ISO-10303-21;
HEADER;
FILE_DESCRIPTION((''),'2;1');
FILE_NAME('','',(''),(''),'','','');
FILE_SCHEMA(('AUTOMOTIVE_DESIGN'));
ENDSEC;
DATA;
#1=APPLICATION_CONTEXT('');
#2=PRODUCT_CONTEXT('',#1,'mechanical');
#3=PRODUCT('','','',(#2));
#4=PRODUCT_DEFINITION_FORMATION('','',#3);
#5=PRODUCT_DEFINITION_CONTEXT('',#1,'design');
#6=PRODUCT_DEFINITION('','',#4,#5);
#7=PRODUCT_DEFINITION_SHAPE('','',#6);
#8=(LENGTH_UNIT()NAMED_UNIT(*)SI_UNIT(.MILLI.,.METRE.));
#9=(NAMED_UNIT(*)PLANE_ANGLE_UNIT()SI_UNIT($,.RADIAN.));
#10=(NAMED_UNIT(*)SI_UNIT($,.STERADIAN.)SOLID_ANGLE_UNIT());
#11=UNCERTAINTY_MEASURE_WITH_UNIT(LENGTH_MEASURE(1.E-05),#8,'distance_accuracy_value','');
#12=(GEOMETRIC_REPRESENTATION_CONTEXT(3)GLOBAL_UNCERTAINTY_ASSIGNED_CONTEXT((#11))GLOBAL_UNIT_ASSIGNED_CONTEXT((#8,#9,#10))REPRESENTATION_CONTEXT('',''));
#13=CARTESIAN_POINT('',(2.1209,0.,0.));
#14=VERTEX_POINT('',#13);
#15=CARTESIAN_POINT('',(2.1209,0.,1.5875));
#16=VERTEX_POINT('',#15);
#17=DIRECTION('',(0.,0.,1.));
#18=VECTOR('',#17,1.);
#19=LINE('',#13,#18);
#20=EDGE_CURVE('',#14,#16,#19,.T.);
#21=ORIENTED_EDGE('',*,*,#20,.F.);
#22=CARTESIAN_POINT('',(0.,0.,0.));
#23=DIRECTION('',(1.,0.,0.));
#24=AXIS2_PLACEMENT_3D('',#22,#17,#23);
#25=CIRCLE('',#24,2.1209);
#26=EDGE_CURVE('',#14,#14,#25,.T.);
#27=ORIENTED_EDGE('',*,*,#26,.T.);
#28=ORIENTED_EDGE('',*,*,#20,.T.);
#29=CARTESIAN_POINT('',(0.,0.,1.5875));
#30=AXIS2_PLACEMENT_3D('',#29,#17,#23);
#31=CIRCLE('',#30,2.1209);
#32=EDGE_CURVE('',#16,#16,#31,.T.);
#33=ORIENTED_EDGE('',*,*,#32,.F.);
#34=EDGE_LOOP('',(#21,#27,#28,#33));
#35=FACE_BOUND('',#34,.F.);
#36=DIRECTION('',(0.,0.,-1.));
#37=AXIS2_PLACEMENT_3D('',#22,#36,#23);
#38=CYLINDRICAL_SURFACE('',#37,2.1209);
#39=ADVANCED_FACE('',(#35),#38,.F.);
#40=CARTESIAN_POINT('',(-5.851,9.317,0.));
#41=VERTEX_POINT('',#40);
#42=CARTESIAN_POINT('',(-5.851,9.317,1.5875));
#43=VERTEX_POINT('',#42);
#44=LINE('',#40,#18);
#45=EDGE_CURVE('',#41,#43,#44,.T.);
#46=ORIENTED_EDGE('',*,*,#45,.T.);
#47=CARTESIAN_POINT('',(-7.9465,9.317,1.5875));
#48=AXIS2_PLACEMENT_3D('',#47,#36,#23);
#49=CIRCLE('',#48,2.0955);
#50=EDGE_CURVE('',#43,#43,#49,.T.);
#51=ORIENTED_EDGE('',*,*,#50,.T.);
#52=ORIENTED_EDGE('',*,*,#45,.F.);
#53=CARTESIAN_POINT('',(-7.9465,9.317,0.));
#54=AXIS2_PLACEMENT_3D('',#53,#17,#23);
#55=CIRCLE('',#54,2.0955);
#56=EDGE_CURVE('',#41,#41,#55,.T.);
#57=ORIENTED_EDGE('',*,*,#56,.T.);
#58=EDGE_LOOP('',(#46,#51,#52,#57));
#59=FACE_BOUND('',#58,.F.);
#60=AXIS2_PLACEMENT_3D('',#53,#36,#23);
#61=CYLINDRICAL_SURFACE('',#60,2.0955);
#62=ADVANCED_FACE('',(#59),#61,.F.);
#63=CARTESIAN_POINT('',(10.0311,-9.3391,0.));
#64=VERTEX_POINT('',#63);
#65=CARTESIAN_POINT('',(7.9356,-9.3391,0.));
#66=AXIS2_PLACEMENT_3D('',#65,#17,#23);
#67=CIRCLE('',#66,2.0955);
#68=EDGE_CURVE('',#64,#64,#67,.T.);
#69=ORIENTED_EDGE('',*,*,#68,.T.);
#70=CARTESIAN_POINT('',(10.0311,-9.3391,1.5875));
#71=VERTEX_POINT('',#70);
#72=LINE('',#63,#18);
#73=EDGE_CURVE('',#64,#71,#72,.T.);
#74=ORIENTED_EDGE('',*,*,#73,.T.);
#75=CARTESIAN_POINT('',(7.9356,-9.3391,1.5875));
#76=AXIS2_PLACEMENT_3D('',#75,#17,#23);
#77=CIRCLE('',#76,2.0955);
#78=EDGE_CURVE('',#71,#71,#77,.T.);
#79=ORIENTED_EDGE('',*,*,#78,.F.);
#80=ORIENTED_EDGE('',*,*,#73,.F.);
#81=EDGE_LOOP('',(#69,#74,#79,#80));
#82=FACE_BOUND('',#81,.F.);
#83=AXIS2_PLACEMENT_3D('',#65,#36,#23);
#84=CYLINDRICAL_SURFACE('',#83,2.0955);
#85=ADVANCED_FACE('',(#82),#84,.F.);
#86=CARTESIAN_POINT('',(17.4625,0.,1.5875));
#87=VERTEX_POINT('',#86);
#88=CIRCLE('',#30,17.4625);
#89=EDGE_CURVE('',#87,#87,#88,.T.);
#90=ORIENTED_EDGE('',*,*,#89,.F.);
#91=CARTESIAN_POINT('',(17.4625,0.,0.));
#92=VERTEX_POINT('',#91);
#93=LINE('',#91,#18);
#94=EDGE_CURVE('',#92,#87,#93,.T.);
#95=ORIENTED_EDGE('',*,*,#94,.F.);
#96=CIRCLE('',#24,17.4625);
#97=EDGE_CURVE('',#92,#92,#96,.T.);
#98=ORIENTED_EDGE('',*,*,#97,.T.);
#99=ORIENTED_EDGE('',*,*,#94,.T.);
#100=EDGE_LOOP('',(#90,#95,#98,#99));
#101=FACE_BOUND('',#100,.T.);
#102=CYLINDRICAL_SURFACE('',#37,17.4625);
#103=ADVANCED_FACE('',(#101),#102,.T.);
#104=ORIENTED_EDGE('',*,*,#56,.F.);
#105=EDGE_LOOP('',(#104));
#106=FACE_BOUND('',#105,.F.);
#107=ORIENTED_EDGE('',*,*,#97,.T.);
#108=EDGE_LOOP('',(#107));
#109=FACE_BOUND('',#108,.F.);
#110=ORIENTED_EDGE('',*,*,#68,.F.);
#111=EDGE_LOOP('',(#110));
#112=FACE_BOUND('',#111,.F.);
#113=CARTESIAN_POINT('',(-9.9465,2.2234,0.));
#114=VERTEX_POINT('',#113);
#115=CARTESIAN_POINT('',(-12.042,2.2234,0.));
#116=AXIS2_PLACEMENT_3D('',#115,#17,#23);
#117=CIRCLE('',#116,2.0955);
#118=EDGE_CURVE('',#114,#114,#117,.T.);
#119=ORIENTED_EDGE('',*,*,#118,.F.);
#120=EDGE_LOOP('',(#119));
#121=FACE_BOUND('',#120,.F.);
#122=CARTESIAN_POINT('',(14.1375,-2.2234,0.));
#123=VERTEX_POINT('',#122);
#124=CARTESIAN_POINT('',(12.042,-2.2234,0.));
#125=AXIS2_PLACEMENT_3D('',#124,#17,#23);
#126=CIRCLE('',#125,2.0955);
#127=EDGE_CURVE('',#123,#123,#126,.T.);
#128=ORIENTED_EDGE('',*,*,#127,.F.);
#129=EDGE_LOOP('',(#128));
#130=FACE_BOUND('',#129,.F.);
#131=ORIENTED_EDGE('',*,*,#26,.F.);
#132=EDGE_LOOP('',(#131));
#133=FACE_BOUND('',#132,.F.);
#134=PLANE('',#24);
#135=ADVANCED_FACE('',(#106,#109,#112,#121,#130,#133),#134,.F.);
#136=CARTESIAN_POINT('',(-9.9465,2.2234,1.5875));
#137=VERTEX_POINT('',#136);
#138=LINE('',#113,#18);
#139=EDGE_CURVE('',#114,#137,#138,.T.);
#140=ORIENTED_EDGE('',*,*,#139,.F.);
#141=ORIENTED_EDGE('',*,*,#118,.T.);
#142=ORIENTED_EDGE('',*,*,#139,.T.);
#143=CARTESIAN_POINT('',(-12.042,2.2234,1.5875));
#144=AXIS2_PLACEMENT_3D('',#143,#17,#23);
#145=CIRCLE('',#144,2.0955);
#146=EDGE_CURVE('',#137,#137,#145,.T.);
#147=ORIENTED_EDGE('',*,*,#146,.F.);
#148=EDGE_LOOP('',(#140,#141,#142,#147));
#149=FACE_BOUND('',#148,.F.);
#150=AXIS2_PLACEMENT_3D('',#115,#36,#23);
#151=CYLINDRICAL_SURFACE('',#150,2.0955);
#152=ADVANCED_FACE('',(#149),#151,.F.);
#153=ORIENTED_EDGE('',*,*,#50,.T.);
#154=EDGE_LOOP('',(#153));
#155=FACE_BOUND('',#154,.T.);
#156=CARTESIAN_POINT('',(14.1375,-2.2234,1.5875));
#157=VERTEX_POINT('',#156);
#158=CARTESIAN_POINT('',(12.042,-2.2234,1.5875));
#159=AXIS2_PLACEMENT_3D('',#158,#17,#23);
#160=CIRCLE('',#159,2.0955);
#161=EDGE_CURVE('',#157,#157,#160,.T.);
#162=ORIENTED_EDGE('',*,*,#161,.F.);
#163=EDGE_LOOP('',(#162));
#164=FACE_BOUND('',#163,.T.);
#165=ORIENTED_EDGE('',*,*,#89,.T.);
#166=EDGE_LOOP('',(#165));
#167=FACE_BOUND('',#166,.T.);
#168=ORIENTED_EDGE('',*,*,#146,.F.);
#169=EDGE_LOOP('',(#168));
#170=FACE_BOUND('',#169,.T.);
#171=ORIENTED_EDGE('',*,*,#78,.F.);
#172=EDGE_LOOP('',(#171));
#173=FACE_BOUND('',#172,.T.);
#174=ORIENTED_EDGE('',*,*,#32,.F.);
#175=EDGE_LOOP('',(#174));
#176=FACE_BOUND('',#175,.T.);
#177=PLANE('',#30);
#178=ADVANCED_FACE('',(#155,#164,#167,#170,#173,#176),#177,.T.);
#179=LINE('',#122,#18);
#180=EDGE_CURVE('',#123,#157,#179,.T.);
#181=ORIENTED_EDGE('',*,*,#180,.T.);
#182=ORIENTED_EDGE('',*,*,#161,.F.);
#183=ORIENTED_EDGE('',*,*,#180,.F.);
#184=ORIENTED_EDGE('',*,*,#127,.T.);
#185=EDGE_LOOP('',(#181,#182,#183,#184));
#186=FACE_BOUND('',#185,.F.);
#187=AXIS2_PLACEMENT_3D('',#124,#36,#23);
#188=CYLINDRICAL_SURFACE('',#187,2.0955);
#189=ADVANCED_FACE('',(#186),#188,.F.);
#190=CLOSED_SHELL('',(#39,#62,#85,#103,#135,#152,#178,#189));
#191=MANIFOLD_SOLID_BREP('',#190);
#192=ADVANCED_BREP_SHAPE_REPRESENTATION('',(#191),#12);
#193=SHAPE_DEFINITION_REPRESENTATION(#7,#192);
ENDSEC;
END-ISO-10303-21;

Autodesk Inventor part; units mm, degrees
ref_plane "YZ Plane" through (0, 0, 0) normal (1, 0, 0) x (0, 1, 0)
ref_plane "XZ Plane" through (0, 0, 0) normal (0, 1, 0) x (-1, 0, 0)
ref_plane "XY Plane" through (0, 0, 0) normal (0, 0, 1) x (1, 0, 0)
sketch "main" plane through (0, 0, 0) normal (0, 0, 1) x (1, 0, 0)
  circle A0 centre (-3.5355, 3.6269) radius 17.4625
  arc A1 (-12.4711, 11.0953) -> (-10.1649, 11.3129) centre (-11.4711, 12.8274) ccw
  circle A2 centre (4.4001, -5.7121) radius 2.0955
  circle A3 centre (8.5065, 1.4036) radius 2.0955
  circle A4 centre (-11.482, 12.9439) radius 2.0955
  circle A5 centre (-15.5775, 5.8503) radius 2.0955
  circle A6 centre (-3.5355, 3.6269) radius 2.1209
  point P0 (-4.7735, 4.9064)
  point P1 (3.0939, -4.059)
  point P2 (5.4001, -3.8415)
  dimension "d0" = 4.191
  dimension "d1" = 34.925
  dimension "d2" = 4.191
  dimension "d3" = 4.191
  dimension "d4" = 4.191
  dimension "d5" = 4.2418
sketch "Sketch1" plane through (0, 0, 0) normal (0, 0, 1) x (1, 0, 0)
  circle A0 centre (0, 0) radius 17.4625
  arc A1 (-8.9356, 7.4684) -> (-6.6294, 7.686) centre (-7.9356, 9.2004) ccw
  circle A2 centre (7.9356, -9.3391) radius 2.0955
  circle A3 centre (12.042, -2.2234) radius 2.0955
  circle A4 centre (-7.9465, 9.317) radius 2.0955
  circle A5 centre (-12.042, 2.2234) radius 2.0955
  circle A6 centre (0, 0) radius 2.1209
extrude "Extrusion1" add sketch "Sketch1" along normal blind 1.5875 contours A0 | A4 A1
properties part number "2in_flex_wheel_hub" material "Acetal Resin, White"
